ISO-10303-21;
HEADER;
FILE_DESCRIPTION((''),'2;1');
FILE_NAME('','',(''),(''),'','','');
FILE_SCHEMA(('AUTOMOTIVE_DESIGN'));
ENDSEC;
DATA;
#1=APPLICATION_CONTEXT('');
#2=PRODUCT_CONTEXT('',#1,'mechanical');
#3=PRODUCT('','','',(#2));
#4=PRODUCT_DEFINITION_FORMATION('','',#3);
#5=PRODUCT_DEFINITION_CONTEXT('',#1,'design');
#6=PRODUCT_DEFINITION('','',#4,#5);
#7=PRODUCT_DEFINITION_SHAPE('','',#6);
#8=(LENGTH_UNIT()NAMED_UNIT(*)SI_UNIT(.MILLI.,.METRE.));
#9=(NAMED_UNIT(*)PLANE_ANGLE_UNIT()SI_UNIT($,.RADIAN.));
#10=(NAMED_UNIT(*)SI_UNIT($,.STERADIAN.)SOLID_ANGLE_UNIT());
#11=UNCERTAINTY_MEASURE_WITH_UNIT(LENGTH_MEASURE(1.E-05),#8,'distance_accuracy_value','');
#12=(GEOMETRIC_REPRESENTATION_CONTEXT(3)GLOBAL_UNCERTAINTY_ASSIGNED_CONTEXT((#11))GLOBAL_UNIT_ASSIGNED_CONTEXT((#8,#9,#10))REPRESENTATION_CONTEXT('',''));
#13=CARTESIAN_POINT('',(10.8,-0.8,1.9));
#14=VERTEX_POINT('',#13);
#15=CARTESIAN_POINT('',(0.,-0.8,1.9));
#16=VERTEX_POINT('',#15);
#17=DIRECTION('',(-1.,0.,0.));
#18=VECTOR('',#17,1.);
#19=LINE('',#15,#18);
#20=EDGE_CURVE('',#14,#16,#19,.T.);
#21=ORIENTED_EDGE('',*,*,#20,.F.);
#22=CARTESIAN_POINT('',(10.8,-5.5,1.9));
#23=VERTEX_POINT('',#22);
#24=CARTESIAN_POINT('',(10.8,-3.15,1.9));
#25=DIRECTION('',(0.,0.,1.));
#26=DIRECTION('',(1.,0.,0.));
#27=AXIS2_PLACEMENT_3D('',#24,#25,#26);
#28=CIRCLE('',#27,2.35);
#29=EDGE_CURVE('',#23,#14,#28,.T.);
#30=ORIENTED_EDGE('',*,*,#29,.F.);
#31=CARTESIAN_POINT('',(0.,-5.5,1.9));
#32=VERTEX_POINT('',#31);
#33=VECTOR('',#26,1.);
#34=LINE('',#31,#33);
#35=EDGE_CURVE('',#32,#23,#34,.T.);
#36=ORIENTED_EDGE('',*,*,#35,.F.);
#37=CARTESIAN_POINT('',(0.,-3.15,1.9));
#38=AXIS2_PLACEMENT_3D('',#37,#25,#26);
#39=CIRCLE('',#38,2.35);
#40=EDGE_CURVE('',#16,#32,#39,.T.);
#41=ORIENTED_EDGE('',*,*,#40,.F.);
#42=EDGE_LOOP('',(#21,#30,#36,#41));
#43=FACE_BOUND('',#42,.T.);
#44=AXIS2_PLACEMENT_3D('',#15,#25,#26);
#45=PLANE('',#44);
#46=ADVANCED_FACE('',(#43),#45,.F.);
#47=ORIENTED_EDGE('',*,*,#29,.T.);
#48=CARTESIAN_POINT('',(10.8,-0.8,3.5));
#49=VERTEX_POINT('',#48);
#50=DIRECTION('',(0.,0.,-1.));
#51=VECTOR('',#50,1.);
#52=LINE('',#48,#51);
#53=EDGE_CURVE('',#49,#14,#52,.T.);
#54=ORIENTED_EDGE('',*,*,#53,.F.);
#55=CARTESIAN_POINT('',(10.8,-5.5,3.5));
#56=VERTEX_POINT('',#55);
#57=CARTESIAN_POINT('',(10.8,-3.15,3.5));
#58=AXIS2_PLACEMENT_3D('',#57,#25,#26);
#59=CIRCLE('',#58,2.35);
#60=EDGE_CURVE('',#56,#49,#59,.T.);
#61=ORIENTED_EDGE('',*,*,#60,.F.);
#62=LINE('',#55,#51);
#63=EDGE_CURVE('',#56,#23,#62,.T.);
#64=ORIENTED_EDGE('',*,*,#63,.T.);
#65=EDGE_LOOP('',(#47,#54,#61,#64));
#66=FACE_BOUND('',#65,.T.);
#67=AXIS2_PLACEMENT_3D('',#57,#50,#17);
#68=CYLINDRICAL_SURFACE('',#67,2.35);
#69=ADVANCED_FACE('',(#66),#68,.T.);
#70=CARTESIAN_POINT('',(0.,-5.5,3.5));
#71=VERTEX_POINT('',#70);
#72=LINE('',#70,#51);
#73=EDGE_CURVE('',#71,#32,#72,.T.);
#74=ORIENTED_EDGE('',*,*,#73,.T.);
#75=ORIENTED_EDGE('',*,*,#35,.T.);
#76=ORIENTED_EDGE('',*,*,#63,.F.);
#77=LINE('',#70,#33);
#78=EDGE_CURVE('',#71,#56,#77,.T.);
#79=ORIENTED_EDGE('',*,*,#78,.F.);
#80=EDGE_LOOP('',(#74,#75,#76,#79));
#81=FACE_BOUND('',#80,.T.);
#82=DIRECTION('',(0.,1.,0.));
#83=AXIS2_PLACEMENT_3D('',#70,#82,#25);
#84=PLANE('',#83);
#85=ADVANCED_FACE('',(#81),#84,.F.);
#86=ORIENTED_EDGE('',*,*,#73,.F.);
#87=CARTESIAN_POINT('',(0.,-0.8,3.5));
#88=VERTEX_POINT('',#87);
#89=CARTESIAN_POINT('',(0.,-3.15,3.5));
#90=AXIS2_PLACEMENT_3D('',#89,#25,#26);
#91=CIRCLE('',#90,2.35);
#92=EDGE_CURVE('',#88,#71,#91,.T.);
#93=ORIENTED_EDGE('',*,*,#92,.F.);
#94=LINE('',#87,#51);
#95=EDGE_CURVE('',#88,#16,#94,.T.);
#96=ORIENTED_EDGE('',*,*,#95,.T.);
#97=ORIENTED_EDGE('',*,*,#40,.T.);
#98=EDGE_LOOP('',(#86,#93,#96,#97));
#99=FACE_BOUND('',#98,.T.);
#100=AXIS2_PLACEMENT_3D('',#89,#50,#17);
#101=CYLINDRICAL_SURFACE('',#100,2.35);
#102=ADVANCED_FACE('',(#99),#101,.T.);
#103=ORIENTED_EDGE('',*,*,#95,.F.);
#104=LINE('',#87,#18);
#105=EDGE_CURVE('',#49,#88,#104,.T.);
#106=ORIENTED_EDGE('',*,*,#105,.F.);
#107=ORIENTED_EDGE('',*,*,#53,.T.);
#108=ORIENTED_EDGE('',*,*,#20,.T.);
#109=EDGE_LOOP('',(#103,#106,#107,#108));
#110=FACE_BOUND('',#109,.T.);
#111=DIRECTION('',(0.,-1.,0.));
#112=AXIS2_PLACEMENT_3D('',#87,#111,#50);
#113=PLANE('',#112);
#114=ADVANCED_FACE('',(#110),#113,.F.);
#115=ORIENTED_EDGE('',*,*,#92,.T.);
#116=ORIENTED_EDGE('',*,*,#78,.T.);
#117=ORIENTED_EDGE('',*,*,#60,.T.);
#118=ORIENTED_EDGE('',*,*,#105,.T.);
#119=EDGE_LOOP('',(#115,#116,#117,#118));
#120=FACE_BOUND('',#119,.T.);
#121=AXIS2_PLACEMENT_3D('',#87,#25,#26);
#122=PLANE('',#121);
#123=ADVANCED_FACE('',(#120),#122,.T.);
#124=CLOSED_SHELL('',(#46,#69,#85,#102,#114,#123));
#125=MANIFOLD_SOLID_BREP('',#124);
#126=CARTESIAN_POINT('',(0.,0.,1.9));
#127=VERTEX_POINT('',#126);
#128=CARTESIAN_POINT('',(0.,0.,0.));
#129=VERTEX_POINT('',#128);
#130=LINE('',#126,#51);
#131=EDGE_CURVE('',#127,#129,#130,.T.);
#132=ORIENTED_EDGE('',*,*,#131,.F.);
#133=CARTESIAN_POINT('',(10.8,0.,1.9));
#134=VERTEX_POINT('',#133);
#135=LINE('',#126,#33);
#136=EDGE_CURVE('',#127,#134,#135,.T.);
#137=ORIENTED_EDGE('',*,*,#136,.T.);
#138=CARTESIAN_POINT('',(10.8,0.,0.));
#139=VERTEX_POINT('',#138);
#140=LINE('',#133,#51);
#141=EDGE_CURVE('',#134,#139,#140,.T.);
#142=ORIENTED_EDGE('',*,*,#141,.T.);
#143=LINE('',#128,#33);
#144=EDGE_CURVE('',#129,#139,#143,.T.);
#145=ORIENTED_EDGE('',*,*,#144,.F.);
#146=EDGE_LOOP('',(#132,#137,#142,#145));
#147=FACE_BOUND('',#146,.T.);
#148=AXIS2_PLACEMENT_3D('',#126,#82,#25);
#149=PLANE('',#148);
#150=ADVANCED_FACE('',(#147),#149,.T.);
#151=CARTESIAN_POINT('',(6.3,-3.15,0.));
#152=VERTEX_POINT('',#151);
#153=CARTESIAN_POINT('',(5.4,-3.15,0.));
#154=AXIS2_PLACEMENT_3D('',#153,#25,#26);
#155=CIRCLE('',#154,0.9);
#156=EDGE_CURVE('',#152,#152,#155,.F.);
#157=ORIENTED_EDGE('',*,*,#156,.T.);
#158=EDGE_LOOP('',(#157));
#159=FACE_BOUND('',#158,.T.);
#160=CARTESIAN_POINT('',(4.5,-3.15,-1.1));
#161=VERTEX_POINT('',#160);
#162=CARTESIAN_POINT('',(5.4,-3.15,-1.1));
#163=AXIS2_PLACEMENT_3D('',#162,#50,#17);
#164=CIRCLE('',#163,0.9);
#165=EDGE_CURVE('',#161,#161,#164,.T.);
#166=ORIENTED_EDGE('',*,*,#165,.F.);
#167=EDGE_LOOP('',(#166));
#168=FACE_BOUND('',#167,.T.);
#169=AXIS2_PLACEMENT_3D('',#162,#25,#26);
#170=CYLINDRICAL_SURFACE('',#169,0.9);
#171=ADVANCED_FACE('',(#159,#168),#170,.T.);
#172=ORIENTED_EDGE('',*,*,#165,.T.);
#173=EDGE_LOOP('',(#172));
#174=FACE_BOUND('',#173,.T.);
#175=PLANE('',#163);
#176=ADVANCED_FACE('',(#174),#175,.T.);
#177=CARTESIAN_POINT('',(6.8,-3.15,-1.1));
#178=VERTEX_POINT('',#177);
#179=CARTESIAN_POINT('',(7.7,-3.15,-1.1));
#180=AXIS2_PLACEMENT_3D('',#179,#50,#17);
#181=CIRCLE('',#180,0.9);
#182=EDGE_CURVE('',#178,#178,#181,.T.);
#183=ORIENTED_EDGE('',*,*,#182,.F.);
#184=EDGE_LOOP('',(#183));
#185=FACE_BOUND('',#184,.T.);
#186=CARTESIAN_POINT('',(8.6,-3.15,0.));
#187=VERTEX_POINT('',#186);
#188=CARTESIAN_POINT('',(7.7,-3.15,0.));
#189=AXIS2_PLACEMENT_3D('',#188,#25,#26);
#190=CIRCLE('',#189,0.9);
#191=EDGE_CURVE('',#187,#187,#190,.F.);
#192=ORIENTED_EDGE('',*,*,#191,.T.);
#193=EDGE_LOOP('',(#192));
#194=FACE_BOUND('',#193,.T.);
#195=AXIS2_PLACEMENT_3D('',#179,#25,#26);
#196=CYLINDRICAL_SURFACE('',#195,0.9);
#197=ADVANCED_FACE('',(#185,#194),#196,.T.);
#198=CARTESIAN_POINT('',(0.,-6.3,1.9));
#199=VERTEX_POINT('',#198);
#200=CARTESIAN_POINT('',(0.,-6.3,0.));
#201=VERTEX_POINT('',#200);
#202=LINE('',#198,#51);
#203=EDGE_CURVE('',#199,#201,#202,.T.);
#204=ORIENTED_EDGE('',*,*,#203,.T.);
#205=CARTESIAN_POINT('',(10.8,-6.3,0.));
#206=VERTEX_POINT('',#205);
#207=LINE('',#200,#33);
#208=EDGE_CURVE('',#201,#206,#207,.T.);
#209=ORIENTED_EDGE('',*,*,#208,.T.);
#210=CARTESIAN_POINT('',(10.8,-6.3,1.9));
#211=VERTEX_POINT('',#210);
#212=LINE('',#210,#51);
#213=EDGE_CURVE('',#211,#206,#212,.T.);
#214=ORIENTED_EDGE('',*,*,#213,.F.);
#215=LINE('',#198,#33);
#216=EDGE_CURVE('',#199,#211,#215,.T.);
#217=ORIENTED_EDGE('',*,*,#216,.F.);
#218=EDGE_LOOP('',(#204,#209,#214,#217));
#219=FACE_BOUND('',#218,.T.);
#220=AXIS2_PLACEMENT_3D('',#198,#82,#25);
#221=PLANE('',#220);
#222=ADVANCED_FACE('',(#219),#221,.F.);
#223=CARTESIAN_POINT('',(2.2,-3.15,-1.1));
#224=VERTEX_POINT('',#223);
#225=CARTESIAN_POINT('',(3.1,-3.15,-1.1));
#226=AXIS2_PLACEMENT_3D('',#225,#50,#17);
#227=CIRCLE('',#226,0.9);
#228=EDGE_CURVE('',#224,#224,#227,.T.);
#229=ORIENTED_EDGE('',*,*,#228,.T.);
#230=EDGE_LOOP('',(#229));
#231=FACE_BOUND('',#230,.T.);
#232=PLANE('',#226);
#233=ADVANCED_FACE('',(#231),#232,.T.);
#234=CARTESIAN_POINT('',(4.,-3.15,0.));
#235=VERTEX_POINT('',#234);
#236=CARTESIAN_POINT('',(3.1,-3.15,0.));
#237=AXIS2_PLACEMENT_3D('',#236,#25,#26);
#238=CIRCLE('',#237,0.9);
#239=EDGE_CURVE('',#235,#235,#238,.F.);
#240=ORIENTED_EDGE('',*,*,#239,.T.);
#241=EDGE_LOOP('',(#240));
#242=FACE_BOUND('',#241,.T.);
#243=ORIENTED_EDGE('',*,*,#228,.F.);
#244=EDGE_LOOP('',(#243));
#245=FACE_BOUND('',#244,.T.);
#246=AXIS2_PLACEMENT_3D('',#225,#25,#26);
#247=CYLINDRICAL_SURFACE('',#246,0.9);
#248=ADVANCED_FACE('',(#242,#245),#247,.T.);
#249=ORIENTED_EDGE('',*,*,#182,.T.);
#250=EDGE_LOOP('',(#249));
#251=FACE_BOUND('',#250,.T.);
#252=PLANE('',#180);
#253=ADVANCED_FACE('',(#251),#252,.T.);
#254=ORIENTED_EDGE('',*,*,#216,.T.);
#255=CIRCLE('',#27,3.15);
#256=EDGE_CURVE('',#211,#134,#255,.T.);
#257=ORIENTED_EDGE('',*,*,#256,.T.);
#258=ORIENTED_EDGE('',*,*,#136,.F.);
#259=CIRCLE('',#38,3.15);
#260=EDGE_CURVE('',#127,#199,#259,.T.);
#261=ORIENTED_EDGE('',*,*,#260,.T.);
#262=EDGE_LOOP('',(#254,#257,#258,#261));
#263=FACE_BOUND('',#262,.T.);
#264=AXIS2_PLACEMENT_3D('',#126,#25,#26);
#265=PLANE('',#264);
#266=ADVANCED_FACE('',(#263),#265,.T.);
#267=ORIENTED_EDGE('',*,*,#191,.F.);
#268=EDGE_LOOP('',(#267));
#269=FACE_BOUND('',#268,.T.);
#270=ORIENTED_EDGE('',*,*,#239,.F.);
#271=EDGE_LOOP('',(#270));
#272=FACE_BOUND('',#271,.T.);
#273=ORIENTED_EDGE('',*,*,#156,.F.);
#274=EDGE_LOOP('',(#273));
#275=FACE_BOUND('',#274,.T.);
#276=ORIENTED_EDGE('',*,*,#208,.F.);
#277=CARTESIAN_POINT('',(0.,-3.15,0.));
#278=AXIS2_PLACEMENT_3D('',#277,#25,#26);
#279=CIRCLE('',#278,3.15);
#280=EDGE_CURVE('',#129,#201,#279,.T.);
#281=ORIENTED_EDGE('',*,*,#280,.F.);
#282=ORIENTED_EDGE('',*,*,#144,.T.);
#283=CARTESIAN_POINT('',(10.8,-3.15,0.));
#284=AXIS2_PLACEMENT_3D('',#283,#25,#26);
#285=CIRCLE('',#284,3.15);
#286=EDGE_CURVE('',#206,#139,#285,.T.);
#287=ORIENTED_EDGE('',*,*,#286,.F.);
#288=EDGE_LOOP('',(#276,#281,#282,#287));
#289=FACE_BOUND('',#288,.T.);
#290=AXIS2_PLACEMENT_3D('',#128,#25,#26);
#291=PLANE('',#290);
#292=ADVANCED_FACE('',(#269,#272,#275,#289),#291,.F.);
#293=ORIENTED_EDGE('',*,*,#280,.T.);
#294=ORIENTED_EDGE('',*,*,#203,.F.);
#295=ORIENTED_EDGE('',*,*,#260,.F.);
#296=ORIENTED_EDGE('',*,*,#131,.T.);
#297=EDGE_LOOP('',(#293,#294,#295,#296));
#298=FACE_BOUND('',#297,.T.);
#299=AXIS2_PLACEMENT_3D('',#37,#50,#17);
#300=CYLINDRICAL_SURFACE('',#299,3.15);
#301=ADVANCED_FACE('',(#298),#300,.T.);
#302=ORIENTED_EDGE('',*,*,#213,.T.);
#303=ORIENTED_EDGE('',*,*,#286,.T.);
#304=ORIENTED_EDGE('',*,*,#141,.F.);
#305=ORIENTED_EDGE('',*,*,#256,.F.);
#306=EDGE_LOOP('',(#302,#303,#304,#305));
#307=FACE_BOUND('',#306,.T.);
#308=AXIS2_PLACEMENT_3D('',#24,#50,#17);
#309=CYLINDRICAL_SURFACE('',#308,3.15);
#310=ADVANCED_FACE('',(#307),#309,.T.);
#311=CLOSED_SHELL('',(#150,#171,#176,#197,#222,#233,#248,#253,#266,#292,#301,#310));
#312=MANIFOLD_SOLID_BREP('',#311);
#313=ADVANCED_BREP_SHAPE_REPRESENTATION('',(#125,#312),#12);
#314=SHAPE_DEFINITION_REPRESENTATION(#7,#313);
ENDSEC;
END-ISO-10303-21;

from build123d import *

# Parameters (mm, degrees)
SKETCH_1_R          = 3.15
SKETCH_1_W          = 10.8
SKETCH_1_H          = 6.3
EXTRUDE_1_DEPTH     = 1.9
EXTRUDE_4_DEPTH     = 1.6
MOVE_START          = 1.9
MOVE_BODY_1_DEPTH   = 1.6
MOVE_BODY_1_2_DEPTH = 1.6
SKETCH_6_R          = 0.9
EXTRUDE_5_DEPTH     = 1.1


# Read off the part's stored shape, not the designer's step: Тело-Переместить/Копировать1
with BuildPart() as part:
    # Эскиз1 → Бобышка-Вытянуть1 (new body)
    with BuildSketch(Plane.XY):
        with Locations((0, -3.15)):
            Circle(SKETCH_1_R)
        with Locations((10.8, -3.15)):
            Circle(SKETCH_1_R)
        with Locations((5.4, -3.15)):
            Rectangle(SKETCH_1_W, SKETCH_1_H)
    extrude(amount=EXTRUDE_1_DEPTH)

    # Эскиз6 → Бобышка-Вытянуть5 (add)
    with BuildSketch(Plane(origin=(0, 0, 0), x_dir=(-1, 0, 0), z_dir=(0, 0, -1))):
        with Locations(Location((-5.4, -3.15, 0), (0, 0, 180))):
            Circle(SKETCH_6_R)
        with Locations(Location((-7.7, -3.15, 0), (0, 0, 180))):
            Circle(SKETCH_6_R)
        with Locations(Location((-3.1, -3.15, 0), (0, 0, 180))):
            Circle(SKETCH_6_R)
    extrude(amount=EXTRUDE_5_DEPTH)


with BuildPart() as body_2:
    # Эскиз4 → Бобышка-Вытянуть4 (new body)
    with BuildSketch(Plane.XY.offset(1.9)):
        with BuildLine():
            ThreePointArc((0, 0), (-2.35, -2.35), (0, -4.7))
            Line((0, -4.7), (0, 0))
        make_face()
        with BuildLine():
            Line((0, 0), (0, -4.7))
            ThreePointArc((0, -4.7), (1.661700936, -4.011700936), (2.35, -2.35))
            ThreePointArc((2.35, -2.35), (1.661700936, -0.688299064), (0, 0))
        make_face()
        with BuildLine():
            ThreePointArc((2.35, -2.35), (1.661700936, -4.011700936), (0, -4.7))
            Line((0, -4.7), (10.8, -4.7))
            ThreePointArc((10.8, -4.7), (8.45, -2.35), (10.8, 0))
            Line((10.8, 0), (0, 0))
            ThreePointArc((0, 0), (1.661700936, -0.688299064), (2.35, -2.35))
        make_face()
        with BuildLine():
            ThreePointArc((10.8, 0), (8.45, -2.35), (10.8, -4.7))
            Line((10.8, -4.7), (10.8, 0))
        make_face()
        with BuildLine():
            Line((10.8, 0), (10.8, -4.7))
            ThreePointArc((10.8, -4.7), (12.461700936, -4.011700936), (13.15, -2.35))
            ThreePointArc((13.15, -2.35), (12.461700936, -0.688299064), (10.8, 0))
        make_face()
    extrude(amount=EXTRUDE_4_DEPTH)

    # Move Body 1 outline → Move Body 1 (cut)
    with BuildSketch(Plane.XY.offset(MOVE_START)):
        with BuildLine():
            ThreePointArc((0, 0), (-1.797567801, -0.83631245), (-2.315707235, -2.75))
            ThreePointArc((-2.315707235, -2.75), (-1.51368755, -1.352432199), (0, -0.8))
            Line((0, -0.8), (10.8, -0.8))
            ThreePointArc((10.8, -0.8), (12.31368755, -1.352432199), (13.115707235, -2.75))
            ThreePointArc((13.115707235, -2.75), (12.597567801, -0.83631245), (10.8, 0))
            Line((10.8, 0), (0, 0))
        make_face()
    extrude(amount=MOVE_BODY_1_DEPTH, mode=Mode.SUBTRACT)

    # Move Body 1 2 outline → Move Body 1 2 (add)
    with BuildSketch(Plane.XY.offset(MOVE_START)):
        with BuildLine():
            ThreePointArc((-2.315707235, -2.75), (-1.797567801, -4.66368755), (0, -5.5))
            Line((0, -5.5), (10.8, -5.5))
            ThreePointArc((10.8, -5.5), (12.597567801, -4.66368755), (13.115707235, -2.75))
            ThreePointArc((13.115707235, -2.75), (12.31368755, -4.147567801), (10.8, -4.7))
            Line((10.8, -4.7), (0, -4.7))
            ThreePointArc((0, -4.7), (-1.51368755, -4.147567801), (-2.315707235, -2.75))
        make_face()
    extrude(amount=MOVE_BODY_1_2_DEPTH)


solid = Compound([part.part, body_2.part])
